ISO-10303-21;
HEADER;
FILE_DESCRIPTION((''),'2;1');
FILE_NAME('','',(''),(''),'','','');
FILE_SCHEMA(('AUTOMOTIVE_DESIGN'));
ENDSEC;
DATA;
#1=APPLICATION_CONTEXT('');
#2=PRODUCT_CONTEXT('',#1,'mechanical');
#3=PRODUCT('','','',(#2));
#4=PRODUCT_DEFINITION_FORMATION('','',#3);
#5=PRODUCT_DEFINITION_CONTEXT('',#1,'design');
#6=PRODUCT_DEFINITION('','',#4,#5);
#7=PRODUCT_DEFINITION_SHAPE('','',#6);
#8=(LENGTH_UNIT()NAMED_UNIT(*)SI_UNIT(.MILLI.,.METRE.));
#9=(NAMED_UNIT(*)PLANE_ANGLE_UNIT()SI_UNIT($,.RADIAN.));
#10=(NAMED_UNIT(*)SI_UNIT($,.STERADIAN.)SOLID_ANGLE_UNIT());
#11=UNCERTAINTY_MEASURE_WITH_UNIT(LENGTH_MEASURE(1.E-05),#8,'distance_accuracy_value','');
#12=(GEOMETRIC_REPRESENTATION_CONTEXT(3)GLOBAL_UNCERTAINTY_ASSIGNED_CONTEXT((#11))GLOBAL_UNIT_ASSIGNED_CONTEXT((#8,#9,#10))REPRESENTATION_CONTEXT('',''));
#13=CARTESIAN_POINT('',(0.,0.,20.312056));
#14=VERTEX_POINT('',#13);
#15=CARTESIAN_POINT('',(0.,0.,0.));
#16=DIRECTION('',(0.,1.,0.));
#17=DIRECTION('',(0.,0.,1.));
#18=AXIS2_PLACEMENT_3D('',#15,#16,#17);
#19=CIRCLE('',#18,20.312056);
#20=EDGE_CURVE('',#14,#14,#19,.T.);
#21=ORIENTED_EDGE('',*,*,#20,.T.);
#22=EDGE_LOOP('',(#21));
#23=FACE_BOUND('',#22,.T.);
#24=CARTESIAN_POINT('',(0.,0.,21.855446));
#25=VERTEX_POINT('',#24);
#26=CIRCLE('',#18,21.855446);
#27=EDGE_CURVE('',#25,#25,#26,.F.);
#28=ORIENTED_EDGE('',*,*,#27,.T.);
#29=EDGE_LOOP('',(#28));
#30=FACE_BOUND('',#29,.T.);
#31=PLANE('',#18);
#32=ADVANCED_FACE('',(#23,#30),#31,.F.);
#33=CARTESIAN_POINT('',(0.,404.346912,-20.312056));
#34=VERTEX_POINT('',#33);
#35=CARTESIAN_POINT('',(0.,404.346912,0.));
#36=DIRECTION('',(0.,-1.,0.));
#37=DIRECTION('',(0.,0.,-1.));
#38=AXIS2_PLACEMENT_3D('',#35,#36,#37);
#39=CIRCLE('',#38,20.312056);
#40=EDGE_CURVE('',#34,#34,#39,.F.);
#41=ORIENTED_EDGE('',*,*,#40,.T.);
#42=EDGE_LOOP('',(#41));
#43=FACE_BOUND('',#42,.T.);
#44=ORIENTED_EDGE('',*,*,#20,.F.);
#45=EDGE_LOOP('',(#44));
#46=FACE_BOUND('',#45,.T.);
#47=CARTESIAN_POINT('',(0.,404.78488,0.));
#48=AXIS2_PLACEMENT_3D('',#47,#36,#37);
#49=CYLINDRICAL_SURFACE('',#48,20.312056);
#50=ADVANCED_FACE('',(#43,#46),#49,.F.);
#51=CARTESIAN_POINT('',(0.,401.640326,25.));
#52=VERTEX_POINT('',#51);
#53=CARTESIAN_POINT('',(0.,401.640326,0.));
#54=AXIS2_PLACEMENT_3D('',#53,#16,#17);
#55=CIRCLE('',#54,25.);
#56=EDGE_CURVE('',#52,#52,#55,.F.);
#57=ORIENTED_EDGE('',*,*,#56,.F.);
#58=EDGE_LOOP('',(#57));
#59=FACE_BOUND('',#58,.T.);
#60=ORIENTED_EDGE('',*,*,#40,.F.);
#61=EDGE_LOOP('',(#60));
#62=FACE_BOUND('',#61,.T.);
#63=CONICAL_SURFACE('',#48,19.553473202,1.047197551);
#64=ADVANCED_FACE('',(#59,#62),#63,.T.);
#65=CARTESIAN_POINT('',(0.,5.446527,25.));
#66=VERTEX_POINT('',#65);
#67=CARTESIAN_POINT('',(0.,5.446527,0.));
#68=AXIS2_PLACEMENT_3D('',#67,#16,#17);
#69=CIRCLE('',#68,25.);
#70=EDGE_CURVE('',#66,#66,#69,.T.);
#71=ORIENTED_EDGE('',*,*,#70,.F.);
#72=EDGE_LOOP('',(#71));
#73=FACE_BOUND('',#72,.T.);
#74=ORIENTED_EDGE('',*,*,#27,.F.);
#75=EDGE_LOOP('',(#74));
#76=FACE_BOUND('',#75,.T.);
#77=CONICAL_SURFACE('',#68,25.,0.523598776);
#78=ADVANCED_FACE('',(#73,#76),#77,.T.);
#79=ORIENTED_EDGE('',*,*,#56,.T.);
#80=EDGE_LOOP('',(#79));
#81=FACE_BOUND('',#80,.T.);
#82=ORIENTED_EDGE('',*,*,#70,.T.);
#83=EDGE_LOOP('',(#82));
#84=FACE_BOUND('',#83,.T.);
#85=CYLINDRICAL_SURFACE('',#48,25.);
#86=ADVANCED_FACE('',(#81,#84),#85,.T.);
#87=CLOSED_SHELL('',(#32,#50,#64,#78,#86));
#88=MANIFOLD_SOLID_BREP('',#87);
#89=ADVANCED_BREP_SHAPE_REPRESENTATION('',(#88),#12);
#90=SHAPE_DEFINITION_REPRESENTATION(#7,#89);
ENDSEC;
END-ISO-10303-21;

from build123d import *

# Parameters (mm, degrees)
SKETCH1_R           = 25
BOSS_EXTRUDE1_DEPTH = 404.78488
SKETCH2_R           = 20.312055764
CUT_EXTRUDE1_DEPTH  = 407.325976374
CHAMFER1_SIZE       = 3.144554
CHAMFER1_SIZE_2     = 5.446527


with BuildPart() as part:
    # Sketch1 → Boss-Extrude1 (new body)
    with BuildSketch(Plane(origin=(0, 0, 0), x_dir=(1, 0, 0), z_dir=(0, 1, 0))):
        with Locations(Location((0, 0, 0), (0, 0, 270))):
            Circle(SKETCH1_R)
    extrude(amount=BOSS_EXTRUDE1_DEPTH)

    # Sketch2 → Cut-Extrude1 (cut, through all)
    with BuildSketch(Plane(origin=(0, 0, 0), x_dir=(1, 0, 0), z_dir=(0, 1, 0))):
        with Locations(Location((0, 0, 0), (0, 0, 270))):
            Circle(SKETCH2_R)
    extrude(amount=CUT_EXTRUDE1_DEPTH, mode=Mode.SUBTRACT)

    # Chamfer1
    # the kernel refuses this chamfer: 5.446527, 3.144554 mm, written as the material it takes off along each edge
    with BuildSketch(Plane(origin=(0, 404.78488, 0), x_dir=(0, 0, 1), z_dir=(-1, 0, 0))) as chamfer1_piece_1:
        Polygon((25, -CHAMFER1_SIZE), (25 - CHAMFER1_SIZE_2, 0), (25, 0), align=None)
    revolve(axis=Axis((0, 404.78488, 0), (0, 1, 0)), mode=Mode.SUBTRACT)
    with BuildSketch(Plane(origin=(0, 0, 0), x_dir=(0, 0, 1), z_dir=(-1, 0, 0))) as chamfer1_piece_2:
        Polygon((25, CHAMFER1_SIZE_2), (25 - CHAMFER1_SIZE, 0), (25, 0), align=None)
    revolve(axis=Axis((0, 0, 0), (0, 1, 0)), mode=Mode.SUBTRACT)


solid = part.part
